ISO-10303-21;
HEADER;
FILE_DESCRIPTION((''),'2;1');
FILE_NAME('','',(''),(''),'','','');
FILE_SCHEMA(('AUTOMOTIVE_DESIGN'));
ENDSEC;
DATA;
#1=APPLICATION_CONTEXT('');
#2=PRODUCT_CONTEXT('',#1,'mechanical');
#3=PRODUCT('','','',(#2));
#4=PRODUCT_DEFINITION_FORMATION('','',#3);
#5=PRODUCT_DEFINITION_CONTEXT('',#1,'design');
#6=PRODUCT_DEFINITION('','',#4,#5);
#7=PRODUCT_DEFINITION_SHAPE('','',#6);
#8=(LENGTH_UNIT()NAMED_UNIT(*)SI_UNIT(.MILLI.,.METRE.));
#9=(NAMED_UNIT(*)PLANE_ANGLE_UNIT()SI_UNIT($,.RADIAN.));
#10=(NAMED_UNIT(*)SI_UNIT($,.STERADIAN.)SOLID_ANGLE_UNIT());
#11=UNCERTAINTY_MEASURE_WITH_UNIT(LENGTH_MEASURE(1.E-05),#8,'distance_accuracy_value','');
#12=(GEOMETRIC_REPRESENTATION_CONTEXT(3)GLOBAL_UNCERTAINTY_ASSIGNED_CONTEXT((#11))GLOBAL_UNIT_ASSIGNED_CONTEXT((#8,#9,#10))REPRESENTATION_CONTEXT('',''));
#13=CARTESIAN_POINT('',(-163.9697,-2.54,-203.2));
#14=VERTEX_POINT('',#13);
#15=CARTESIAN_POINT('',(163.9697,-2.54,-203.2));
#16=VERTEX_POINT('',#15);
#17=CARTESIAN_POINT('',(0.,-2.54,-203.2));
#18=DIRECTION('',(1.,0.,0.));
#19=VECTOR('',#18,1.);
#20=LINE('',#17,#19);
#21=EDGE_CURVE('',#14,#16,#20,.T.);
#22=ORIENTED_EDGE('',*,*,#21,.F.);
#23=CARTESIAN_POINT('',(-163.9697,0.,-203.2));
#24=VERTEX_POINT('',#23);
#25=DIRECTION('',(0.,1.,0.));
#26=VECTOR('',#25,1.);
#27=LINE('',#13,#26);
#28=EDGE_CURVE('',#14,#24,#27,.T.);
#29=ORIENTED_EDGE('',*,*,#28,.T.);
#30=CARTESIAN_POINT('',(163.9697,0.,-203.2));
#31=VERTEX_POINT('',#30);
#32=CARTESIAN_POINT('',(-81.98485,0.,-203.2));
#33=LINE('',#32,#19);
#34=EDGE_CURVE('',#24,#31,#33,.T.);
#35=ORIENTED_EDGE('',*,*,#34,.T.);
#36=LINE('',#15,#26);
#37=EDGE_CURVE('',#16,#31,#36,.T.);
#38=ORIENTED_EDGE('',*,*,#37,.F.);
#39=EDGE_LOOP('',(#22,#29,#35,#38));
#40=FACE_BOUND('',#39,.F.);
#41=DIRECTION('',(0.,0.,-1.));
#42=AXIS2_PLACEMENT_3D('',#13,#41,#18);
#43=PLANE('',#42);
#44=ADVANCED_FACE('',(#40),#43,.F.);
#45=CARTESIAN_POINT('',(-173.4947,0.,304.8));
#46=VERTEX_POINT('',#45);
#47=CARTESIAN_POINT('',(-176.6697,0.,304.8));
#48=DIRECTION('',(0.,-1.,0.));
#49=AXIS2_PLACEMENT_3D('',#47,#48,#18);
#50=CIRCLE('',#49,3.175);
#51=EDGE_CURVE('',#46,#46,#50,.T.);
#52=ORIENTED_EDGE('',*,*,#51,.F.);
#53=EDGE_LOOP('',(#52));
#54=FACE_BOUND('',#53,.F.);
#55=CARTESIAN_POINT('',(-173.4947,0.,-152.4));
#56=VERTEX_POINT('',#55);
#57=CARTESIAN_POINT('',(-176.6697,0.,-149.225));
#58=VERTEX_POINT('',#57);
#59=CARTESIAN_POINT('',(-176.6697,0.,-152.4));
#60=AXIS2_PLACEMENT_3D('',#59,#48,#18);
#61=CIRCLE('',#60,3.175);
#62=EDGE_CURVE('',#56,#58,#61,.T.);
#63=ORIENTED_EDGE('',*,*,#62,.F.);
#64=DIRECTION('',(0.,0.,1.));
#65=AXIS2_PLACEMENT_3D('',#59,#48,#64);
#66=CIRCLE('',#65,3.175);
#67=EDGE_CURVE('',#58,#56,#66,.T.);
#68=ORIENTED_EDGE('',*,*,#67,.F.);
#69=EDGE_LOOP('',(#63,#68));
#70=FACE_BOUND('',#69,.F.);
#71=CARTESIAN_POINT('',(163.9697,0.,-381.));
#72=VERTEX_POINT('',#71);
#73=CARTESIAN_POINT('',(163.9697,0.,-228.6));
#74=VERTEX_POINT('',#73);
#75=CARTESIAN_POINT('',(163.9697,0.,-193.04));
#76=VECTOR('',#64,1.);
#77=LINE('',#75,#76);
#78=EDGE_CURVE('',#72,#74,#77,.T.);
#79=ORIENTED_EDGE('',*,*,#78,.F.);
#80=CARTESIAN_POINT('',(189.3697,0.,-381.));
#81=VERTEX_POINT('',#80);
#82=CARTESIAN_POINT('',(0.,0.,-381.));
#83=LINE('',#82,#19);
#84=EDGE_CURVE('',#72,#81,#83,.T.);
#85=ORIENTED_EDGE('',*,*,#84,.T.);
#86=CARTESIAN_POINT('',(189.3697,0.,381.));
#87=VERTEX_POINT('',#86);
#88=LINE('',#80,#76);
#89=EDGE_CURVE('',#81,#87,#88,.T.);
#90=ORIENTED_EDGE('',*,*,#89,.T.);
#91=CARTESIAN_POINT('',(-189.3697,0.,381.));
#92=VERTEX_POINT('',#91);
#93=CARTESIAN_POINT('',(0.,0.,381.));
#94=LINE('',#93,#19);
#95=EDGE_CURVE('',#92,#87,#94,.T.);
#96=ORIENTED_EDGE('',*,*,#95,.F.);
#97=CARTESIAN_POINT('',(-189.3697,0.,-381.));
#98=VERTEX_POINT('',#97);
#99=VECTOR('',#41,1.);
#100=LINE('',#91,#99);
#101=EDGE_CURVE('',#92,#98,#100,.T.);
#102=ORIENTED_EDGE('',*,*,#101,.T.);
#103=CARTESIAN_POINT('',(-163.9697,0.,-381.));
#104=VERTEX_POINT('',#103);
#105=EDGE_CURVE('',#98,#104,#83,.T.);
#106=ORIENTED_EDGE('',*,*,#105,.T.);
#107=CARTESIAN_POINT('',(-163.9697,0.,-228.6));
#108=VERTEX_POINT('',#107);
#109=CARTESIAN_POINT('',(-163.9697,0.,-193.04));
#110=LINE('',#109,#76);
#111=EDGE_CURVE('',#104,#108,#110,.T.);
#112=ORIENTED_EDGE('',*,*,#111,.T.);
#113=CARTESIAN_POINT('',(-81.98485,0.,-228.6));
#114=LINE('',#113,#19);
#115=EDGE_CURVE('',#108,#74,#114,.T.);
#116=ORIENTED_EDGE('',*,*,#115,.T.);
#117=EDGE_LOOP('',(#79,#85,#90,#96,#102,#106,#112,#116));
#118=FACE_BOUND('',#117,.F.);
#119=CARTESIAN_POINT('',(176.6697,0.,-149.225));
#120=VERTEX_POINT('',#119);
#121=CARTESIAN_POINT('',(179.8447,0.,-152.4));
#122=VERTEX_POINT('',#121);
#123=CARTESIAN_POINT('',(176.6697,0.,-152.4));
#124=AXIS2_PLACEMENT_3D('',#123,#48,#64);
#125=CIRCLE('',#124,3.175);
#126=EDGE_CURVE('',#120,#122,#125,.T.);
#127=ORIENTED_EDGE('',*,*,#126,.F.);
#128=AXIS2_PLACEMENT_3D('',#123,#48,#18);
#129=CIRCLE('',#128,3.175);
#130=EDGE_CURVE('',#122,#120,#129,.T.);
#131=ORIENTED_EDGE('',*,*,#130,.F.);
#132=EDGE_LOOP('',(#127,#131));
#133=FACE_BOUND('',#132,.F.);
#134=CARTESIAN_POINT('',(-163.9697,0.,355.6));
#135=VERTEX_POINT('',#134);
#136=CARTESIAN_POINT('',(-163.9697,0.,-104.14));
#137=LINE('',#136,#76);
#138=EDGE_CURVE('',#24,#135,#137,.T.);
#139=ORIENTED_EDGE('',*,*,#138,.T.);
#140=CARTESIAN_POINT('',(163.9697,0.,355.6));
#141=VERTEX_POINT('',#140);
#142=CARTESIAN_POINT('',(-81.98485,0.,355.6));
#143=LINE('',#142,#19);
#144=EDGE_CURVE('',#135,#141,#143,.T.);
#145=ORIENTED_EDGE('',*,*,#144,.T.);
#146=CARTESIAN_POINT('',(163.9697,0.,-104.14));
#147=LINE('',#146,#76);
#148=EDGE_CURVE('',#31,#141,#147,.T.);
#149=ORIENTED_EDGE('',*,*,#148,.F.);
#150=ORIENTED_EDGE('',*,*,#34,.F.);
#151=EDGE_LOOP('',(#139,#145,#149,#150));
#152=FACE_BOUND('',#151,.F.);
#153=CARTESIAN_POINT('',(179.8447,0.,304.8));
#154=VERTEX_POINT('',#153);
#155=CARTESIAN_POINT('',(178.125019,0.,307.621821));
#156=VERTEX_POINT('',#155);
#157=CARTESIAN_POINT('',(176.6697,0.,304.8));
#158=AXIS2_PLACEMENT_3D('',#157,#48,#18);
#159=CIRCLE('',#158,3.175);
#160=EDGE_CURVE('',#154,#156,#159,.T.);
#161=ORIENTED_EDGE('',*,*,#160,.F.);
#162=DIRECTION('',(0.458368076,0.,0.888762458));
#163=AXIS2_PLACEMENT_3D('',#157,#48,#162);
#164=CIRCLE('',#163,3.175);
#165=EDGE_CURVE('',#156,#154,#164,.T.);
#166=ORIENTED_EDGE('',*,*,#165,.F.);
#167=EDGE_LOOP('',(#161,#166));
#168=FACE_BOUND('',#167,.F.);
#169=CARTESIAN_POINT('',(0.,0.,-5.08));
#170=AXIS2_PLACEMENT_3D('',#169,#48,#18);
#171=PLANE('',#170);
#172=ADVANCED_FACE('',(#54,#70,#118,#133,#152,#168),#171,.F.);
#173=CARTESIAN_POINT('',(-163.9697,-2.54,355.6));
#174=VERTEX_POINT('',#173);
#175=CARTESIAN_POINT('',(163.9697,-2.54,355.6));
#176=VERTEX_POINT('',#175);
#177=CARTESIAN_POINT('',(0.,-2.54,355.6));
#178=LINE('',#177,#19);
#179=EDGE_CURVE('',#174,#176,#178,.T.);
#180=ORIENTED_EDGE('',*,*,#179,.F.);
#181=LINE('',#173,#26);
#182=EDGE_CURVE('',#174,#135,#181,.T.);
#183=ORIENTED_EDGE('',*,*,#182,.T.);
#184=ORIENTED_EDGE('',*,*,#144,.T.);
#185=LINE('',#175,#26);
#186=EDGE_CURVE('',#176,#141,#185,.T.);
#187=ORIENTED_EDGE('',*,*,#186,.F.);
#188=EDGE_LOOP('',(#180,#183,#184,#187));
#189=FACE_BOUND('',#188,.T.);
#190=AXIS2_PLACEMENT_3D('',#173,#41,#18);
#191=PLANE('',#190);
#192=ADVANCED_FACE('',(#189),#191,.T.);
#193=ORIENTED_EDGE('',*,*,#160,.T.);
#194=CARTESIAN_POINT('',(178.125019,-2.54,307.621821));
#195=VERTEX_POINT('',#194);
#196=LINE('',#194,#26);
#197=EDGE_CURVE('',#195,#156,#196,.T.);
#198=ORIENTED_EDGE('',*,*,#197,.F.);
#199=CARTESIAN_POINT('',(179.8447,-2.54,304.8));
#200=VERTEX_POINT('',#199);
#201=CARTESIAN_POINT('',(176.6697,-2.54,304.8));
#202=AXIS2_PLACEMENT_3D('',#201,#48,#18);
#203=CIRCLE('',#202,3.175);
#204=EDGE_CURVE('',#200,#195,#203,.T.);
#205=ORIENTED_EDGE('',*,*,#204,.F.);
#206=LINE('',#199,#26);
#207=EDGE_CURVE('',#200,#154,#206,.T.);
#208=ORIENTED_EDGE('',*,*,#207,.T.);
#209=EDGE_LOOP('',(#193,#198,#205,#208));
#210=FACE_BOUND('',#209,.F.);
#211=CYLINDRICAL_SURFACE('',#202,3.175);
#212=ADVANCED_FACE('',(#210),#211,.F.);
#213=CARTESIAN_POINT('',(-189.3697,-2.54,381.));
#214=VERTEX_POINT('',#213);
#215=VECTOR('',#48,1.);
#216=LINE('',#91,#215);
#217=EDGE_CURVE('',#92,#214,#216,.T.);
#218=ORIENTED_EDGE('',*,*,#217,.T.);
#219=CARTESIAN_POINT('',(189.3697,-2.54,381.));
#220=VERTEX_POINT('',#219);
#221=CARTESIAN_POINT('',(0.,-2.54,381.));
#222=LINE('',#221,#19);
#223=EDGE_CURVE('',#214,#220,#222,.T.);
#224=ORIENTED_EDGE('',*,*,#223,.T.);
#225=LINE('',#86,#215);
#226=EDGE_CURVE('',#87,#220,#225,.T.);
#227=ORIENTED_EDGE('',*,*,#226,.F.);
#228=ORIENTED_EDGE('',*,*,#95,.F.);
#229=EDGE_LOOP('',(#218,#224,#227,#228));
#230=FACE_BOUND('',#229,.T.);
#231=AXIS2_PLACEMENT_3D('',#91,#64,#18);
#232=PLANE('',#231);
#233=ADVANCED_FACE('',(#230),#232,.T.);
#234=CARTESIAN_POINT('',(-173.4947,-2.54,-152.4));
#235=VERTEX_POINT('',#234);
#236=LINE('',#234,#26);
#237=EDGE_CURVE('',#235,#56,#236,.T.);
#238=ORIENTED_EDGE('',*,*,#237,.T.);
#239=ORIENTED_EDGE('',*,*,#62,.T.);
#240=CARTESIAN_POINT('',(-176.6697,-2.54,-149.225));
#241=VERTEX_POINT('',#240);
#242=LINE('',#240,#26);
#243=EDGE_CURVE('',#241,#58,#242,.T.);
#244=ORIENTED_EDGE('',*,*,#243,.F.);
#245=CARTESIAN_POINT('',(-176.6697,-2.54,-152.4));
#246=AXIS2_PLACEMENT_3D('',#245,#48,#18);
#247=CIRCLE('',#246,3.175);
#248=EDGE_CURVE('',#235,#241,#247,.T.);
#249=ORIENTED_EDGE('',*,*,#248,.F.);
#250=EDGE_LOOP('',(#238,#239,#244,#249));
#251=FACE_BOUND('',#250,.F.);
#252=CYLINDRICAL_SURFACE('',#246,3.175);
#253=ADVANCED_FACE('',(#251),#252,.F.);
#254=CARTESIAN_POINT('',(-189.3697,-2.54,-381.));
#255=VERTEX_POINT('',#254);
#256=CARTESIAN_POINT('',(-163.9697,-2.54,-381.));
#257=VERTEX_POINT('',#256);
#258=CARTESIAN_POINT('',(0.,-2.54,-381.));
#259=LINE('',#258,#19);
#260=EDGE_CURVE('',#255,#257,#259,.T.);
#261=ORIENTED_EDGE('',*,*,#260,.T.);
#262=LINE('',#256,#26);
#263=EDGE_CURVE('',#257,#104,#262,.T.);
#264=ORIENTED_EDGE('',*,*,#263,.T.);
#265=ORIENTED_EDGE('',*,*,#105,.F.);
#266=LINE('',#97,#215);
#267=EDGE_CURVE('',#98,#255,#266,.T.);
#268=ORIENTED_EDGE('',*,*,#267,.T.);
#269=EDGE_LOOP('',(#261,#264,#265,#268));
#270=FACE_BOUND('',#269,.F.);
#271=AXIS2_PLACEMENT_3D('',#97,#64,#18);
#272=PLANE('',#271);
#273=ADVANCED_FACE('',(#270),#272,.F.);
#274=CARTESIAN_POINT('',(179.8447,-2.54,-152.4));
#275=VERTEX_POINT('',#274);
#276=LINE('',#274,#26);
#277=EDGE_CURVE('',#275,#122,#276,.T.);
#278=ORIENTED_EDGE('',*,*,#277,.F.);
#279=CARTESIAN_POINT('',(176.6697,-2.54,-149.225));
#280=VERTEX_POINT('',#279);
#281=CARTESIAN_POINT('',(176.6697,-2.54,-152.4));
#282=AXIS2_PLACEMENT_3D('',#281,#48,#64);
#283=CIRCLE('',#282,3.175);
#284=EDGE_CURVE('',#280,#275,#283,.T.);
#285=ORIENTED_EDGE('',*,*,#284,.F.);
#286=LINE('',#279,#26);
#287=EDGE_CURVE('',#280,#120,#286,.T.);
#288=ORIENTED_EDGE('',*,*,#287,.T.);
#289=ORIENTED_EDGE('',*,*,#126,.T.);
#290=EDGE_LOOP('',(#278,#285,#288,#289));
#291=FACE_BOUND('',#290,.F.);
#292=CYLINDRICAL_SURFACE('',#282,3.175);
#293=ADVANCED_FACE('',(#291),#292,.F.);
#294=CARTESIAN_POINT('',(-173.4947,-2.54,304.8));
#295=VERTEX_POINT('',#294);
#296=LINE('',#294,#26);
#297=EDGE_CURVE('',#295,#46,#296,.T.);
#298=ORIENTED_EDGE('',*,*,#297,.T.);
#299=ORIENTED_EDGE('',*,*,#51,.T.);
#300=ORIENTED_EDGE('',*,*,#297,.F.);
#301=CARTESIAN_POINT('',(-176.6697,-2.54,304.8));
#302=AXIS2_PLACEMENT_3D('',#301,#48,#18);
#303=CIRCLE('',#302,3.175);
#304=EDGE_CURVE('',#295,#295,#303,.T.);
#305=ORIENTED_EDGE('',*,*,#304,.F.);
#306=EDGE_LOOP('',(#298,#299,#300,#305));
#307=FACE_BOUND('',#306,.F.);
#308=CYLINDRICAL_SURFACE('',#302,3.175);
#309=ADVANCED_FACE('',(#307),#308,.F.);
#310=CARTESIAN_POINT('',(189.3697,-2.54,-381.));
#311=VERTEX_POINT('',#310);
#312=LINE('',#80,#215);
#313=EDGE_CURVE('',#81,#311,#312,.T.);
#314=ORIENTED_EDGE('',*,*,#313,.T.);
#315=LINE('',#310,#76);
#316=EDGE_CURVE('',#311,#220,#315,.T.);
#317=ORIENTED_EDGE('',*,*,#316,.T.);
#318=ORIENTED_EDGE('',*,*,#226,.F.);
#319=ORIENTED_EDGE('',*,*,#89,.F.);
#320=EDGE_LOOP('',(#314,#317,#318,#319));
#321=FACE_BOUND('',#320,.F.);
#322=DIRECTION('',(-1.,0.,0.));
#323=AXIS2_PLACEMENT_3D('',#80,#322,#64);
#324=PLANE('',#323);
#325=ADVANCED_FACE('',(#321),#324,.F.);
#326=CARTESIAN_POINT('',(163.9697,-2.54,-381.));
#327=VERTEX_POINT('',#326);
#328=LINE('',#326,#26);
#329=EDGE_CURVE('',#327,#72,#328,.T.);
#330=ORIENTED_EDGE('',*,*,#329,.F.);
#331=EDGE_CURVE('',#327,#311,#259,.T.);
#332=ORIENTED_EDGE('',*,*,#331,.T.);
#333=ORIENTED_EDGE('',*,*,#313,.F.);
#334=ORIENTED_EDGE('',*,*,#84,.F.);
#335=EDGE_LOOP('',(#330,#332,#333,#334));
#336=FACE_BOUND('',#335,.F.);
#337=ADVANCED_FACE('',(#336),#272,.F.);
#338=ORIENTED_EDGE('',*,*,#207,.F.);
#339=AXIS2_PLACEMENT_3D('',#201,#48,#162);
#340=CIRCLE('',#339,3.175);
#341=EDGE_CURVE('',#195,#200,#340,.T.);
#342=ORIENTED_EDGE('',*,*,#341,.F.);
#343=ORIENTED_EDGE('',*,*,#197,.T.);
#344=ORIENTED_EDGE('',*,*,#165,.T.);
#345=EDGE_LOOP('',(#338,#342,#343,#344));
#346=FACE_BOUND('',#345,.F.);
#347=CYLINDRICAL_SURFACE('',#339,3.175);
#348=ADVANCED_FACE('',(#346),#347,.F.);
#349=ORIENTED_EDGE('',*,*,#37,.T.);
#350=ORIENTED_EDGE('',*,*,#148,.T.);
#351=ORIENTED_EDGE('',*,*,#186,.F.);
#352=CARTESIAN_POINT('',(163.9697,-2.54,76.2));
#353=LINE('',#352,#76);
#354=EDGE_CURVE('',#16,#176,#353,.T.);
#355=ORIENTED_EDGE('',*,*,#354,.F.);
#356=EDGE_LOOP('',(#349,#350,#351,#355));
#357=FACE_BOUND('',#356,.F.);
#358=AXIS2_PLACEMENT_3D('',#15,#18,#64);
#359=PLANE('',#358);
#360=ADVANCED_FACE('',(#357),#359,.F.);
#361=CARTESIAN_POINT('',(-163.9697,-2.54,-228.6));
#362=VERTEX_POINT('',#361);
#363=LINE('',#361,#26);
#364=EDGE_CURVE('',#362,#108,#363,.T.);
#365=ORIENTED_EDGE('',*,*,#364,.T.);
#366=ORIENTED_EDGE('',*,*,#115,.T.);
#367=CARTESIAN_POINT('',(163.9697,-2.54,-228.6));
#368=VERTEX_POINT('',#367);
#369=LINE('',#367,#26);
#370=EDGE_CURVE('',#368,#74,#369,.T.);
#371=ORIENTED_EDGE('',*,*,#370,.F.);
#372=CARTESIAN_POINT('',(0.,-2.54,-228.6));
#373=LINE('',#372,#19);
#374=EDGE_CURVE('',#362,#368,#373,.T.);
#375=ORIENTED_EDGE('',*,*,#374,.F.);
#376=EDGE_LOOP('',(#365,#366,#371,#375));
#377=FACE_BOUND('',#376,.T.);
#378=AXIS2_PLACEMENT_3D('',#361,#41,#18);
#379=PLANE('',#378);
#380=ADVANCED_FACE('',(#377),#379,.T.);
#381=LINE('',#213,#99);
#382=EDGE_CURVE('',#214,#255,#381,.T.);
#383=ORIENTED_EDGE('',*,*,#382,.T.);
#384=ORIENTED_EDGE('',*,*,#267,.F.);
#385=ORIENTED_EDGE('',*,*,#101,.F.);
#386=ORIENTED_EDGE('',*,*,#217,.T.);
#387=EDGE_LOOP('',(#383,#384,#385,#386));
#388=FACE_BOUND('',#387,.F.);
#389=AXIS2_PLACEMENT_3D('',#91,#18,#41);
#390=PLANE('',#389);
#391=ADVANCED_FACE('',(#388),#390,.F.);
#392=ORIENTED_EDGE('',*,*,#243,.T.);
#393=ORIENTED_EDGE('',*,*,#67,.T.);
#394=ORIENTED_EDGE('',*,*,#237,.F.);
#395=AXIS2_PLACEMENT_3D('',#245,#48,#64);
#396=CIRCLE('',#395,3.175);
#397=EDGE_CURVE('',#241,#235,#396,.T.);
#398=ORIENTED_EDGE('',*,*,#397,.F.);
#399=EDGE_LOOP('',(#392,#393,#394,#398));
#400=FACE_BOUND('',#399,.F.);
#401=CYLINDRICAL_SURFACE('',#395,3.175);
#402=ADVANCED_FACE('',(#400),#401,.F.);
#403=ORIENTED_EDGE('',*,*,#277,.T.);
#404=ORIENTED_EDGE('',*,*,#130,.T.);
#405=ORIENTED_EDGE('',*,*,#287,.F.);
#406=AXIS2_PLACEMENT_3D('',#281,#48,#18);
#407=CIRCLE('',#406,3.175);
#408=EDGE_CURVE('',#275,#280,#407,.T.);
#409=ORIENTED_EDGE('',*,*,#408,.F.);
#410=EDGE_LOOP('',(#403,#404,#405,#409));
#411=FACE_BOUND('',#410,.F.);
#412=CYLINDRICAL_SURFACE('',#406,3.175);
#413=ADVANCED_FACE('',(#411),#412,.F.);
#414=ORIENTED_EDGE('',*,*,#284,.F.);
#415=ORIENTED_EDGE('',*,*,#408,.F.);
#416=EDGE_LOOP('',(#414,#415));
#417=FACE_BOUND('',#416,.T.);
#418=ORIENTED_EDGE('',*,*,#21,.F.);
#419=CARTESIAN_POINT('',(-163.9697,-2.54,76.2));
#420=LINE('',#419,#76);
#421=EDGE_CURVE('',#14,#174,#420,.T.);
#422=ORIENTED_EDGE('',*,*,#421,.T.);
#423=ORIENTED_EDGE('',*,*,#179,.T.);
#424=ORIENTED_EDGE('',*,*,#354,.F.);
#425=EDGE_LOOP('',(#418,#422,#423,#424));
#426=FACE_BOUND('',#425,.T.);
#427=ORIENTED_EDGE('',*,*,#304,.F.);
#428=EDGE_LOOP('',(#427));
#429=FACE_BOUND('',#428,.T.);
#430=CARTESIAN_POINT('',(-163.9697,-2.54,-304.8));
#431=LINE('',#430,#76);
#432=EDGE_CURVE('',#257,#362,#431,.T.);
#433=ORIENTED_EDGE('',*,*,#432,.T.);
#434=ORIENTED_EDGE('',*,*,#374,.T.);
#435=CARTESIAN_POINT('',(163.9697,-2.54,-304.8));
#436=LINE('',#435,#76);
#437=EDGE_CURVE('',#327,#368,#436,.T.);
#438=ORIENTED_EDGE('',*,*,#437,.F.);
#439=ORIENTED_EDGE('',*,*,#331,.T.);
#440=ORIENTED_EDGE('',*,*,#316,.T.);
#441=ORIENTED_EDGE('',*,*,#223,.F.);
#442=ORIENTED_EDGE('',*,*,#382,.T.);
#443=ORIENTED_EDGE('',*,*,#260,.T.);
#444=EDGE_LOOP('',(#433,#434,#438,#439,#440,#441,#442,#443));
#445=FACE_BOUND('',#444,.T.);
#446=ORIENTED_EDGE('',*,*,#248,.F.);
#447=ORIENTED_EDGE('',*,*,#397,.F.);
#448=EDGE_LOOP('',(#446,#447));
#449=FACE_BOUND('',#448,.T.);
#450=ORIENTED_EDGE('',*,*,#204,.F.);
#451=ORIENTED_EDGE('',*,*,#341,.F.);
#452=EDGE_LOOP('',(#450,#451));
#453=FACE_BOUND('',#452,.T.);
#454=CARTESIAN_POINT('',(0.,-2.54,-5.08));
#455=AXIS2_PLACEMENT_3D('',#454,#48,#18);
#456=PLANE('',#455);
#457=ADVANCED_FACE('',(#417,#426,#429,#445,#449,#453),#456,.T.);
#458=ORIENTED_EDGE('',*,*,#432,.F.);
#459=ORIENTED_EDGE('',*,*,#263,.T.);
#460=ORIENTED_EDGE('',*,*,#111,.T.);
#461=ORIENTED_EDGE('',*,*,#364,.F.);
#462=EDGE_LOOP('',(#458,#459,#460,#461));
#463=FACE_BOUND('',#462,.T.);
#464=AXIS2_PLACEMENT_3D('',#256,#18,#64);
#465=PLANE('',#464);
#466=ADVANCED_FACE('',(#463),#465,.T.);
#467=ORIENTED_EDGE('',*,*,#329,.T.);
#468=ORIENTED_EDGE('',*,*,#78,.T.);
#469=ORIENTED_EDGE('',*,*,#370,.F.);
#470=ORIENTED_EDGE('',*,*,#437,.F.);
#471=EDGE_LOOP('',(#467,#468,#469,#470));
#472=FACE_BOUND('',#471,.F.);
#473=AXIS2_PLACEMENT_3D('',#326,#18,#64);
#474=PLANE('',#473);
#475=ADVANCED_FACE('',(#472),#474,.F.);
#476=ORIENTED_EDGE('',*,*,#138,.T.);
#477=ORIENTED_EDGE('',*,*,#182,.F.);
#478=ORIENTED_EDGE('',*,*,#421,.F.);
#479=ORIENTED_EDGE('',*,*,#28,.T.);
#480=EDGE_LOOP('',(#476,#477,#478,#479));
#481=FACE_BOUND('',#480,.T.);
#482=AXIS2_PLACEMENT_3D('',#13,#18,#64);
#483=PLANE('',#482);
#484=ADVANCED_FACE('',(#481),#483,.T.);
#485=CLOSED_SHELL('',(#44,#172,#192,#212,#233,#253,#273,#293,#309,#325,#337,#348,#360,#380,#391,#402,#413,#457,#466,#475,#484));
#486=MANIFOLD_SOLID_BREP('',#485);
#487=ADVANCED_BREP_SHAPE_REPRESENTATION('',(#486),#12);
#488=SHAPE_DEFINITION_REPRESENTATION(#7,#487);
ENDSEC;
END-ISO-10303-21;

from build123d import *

# Parameters (mm, degrees)
F0_W     = 378.7394
F0_H     = 751.84
F0_H_2   = 10.16
F1_DEPTH = 2.54
F2_W     = 327.9394
F2_H     = 152.4
F2_H_2   = 558.8
F2_R     = 3.175
F3_DEPTH = 2.541


# Not quite as in the source:
# - a length typed as a fraction of an inch, garbled in the dataset ("3 / 203.2 mm" for 3/8 in), is restored


with BuildPart() as f1:
    # F0 (on Front) → F1 (new body)
    with BuildSketch(Plane.XZ):
        with Locations((0, -5.08)):
            Rectangle(F0_W, F0_H)
        with Locations((0, 375.92)):
            Rectangle(F0_W, F0_H_2)
    extrude(amount=F1_DEPTH)

    # F2 (on face) → F3 (cut, through all)
    with BuildSketch(Plane.XZ.offset(2.54)):
        with Locations((0, -304.8)):
            Rectangle(F2_W, F2_H)
        with Locations((0, 76.2)):
            Rectangle(F2_W, F2_H_2)
        with BuildLine():
            ThreePointArc((178.1250186398, 307.6218208052), (173.9584953156, 303.1477306033), (179.8447, 304.8))
            ThreePointArc((179.8447, 304.8), (179.3809046844, 306.4522693967), (178.1250186398, 307.6218208052))
        make_face()
        with BuildLine():
            ThreePointArc((176.6697, -149.225), (174.4246359697, -154.6450640303), (179.8447, -152.4))
            ThreePointArc((179.8447, -152.4), (178.9147640303, -150.1549359697), (176.6697, -149.225))
        make_face()
        with BuildLine():
            ThreePointArc((-176.6697, -149.225), (-178.9147640303, -154.6450640303), (-173.4947, -152.4))
            ThreePointArc((-173.4947, -152.4), (-174.4246359697, -150.1549359697), (-176.6697, -149.225))
        make_face()
        with Locations((-176.6697, 304.8)):
            Circle(F2_R)
    extrude(amount=-F3_DEPTH, mode=Mode.SUBTRACT)


solid = f1.part
